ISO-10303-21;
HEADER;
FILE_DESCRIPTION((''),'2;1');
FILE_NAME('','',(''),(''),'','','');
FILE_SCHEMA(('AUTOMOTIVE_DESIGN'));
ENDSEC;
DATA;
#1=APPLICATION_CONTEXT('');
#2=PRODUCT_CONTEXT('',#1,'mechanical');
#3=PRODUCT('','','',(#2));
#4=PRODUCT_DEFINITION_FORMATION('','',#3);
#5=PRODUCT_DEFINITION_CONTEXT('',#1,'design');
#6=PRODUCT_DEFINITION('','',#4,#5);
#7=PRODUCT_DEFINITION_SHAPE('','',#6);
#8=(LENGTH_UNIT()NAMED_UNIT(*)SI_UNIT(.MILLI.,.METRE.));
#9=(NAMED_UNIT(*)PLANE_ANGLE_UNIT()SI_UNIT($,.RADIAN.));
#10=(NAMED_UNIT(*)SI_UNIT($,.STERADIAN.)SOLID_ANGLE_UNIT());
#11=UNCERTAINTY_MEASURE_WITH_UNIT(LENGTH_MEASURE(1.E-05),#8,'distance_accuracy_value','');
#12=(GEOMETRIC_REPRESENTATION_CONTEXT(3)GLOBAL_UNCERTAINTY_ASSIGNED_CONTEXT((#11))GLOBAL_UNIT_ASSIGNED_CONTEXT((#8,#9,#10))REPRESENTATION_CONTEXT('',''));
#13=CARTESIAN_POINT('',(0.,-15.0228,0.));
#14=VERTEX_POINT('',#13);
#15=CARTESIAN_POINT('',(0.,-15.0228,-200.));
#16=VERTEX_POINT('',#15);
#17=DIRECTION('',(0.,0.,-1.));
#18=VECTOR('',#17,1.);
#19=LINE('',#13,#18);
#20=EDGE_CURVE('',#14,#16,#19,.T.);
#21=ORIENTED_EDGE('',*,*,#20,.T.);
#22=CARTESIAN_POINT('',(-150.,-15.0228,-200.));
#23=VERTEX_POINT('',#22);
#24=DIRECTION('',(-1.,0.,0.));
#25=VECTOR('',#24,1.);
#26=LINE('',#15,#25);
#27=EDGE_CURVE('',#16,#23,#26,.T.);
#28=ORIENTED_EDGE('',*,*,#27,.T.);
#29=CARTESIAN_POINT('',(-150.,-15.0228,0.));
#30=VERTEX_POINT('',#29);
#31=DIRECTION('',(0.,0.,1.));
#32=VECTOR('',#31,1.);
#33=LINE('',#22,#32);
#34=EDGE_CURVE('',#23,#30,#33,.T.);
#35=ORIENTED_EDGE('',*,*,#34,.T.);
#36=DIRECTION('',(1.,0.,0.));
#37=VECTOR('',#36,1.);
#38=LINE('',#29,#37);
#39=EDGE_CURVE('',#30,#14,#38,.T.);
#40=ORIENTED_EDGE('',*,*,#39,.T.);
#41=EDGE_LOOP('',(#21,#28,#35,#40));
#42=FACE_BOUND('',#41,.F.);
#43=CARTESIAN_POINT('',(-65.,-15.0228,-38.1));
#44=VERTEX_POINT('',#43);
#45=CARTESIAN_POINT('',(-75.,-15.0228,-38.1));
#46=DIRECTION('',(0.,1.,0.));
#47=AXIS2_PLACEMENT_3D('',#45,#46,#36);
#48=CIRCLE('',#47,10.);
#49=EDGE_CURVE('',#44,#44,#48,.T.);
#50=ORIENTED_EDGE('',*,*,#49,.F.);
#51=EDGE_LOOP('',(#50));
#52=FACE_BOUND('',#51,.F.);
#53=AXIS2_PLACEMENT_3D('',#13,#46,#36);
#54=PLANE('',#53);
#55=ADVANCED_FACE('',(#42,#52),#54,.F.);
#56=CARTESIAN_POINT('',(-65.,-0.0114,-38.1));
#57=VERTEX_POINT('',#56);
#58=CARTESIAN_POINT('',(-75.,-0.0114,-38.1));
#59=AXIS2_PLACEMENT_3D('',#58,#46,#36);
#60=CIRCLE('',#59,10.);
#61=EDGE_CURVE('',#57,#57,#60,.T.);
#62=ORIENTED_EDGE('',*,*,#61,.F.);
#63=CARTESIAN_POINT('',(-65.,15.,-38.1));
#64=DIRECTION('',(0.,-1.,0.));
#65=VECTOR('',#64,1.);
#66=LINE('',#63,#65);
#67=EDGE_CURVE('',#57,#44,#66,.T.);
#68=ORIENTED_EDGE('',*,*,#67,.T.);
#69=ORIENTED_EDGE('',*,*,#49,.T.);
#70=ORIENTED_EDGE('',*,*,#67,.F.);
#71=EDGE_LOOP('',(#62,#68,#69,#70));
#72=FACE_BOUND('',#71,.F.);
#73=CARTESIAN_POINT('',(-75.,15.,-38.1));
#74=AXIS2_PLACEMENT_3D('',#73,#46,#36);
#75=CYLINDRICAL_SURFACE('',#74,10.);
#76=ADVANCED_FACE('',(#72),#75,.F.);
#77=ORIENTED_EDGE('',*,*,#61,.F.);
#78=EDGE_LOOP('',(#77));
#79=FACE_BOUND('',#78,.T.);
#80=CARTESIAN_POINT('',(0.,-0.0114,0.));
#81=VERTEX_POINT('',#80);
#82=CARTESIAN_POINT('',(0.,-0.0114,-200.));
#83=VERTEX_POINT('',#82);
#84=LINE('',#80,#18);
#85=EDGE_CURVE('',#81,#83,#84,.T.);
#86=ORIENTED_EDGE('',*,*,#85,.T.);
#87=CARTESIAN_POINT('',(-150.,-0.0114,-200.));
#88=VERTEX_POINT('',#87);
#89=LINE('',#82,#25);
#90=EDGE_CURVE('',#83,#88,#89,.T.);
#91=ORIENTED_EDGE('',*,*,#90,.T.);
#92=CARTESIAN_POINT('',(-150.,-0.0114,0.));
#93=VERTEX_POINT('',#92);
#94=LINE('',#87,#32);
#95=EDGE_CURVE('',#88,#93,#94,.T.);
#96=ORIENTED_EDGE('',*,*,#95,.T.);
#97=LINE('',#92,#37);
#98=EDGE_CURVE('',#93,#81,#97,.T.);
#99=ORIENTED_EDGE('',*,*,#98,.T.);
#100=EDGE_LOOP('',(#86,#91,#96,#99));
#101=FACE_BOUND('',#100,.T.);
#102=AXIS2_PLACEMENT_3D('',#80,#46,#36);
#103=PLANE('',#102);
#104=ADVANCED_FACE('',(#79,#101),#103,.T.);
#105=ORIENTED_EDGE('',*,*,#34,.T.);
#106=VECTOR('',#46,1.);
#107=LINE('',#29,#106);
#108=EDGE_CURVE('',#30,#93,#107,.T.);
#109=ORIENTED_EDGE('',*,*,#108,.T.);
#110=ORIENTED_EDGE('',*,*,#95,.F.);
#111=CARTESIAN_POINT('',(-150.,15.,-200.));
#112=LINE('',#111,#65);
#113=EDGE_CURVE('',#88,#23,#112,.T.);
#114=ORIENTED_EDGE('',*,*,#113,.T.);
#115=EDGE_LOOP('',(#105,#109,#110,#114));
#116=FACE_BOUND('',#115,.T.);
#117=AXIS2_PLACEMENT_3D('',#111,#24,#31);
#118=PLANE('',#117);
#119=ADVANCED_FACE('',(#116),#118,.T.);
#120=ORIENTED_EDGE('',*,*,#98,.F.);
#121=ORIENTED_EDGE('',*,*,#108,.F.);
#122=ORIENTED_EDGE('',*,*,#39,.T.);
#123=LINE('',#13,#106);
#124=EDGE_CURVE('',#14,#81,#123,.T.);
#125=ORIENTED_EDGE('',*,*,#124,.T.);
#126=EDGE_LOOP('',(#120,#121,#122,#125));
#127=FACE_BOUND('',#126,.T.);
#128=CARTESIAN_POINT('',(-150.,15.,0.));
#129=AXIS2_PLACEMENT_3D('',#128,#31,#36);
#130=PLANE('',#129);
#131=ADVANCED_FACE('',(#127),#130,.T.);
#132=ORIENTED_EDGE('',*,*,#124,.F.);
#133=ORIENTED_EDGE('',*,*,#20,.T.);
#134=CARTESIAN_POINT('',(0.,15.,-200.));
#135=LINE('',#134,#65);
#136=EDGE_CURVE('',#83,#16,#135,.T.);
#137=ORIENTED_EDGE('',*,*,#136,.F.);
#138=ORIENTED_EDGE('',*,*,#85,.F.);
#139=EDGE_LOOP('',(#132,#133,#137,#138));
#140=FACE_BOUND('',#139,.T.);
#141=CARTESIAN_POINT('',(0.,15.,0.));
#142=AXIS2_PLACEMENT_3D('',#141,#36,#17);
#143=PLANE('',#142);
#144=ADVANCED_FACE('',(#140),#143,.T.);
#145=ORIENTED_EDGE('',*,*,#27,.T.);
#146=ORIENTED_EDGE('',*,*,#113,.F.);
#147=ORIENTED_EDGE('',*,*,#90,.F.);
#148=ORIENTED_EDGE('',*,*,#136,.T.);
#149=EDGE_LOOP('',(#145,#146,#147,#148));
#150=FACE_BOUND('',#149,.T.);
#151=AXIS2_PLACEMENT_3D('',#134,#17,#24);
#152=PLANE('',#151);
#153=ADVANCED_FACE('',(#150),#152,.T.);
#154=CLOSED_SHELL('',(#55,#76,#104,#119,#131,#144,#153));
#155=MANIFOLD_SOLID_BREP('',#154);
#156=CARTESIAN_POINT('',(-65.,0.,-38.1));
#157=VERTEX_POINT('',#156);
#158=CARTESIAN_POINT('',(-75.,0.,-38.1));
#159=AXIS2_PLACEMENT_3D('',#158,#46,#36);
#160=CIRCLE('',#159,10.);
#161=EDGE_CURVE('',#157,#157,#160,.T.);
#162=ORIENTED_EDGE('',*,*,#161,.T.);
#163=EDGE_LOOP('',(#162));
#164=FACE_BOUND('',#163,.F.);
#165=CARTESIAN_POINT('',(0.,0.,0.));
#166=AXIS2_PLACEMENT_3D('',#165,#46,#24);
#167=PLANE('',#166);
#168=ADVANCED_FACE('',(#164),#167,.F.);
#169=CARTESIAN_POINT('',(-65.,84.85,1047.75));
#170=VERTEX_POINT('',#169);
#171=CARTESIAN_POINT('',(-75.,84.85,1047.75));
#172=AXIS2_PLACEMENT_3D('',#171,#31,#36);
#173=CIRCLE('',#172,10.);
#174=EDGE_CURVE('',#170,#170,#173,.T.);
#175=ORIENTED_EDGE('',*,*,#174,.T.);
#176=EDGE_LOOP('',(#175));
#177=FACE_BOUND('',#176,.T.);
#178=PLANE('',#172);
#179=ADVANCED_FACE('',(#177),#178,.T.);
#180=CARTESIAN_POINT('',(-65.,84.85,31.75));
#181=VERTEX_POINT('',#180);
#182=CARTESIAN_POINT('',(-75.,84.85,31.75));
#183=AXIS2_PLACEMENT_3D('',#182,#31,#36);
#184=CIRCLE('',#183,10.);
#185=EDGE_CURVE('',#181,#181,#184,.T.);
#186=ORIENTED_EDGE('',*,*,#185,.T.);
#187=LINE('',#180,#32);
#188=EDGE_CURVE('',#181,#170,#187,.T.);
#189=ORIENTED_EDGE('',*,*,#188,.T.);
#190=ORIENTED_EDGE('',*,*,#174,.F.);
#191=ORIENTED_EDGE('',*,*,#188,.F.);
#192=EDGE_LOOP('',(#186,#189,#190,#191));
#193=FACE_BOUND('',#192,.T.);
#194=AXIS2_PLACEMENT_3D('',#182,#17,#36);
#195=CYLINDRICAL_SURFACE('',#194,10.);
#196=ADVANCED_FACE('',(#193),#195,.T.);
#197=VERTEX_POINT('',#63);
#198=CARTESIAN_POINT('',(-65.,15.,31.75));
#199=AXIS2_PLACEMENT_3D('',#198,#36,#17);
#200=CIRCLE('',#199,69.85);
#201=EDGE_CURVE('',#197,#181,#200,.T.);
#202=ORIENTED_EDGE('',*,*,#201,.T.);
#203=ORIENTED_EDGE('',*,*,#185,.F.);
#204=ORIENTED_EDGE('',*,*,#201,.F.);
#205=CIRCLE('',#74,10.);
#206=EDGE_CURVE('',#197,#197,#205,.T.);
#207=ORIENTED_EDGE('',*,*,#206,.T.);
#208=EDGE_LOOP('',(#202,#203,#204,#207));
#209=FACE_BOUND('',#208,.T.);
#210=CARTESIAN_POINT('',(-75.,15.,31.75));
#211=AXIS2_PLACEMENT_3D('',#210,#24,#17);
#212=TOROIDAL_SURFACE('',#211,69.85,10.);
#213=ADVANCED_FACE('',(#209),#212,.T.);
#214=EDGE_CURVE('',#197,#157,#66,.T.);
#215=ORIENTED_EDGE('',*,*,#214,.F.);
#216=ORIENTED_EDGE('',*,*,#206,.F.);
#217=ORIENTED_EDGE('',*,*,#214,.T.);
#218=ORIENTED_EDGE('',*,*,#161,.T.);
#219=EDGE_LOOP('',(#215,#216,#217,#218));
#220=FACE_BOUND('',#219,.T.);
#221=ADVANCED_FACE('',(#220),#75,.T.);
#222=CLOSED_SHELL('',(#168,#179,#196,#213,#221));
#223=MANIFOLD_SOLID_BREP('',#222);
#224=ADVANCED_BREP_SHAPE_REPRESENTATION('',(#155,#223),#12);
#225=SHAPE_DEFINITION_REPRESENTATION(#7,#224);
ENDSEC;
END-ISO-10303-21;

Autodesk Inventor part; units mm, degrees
ref_plane "YZ Plane" through (0, 0, 0) normal (1, 0, 0) x (0, 1, 0)
sketch "Sketch1" plane through (0, 0, 0) normal (0, 1, 0) x (-1, 0, 0)
  line L0 (0, 0) -> (150, 0)
  line L1 (150, 0) -> (150, -200)
  line L2 (150, -200) -> (0, -200)
  line L3 (0, -200) -> (0, 0)
  dimension "d0" = 150
  dimension "d1" = 200
extrude "Extrusion1" add sketch "Sketch1" along normal blind 15
sketch "Sketch2" plane through (0, 15, 0) normal (0, 1, 0) x (1, 0, 0)
  circle A0 centre (-75, 38.1) radius 10
  line L0 (-150, 0) -> (0, 0) projected
  line L1 (0, 0) -> (-150, 0)
  line L2 (-181.75, -31.75) -> (31.75, -31.75)
  dimension "d5" = 20
  dimension "d15" = 31.75
ref_plane "Work Plane2" through (0, 15, 0) normal (0, 0, 1) x (1, 0, 0)
ref_plane "Work Plane3" through (-150, 0, 50.8) normal (0, 0, 1) x (1, 0, 0)
ref_plane "Work Plane5" through (0, 15, 31.75) normal (0, 0, 1) x (1, 0, 0)
revolve "Revolution2" add sketch "Sketch2" angle 90 about axis through (-181.75, 15, 31.75) along (1, 0, 0)
sketch "Sketch7" plane through (-75, 84.85, 31.75) normal (0, 0, 1) x (1, 0, 0)
  circle A0 centre (0, 0) radius 10 projected
  point P0 (75, -84.85)
extrude "Extrusion3" add sketch "Sketch7" along normal blind 1016
sketch "Sketch8" plane through (0, 15, 0) normal (0, 1, 0) x (1, 0, 0)
  circle A0 centre (-75, 38.1) radius 10 projected
  line L0 (-150, 0) -> (0, 0) projected
  line L1 (0, 0) -> (0, 200) projected
  line L2 (0, 200) -> (-150, 200) projected
  line L3 (-150, 200) -> (-150, 0) projected
extrude "Extrusion4" add sketch "Sketch8" against normal blind 30.0228
sketch "Sketch9" plane through (0, 15, 0) normal (0, 1, 0) x (1, 0, 0)
  circle A0 centre (-75, 38.1) radius 10 projected
  line L0 (-150, 0) -> (0, 0) projected
  line L1 (0, 0) -> (0, 200) projected
  line L2 (0, 200) -> (-150, 200) projected
  line L3 (-150, 200) -> (-150, 0) projected
extrude "Extrusion5" cut sketch "Sketch9" against normal blind 15.0114
properties part number "vent cover"
